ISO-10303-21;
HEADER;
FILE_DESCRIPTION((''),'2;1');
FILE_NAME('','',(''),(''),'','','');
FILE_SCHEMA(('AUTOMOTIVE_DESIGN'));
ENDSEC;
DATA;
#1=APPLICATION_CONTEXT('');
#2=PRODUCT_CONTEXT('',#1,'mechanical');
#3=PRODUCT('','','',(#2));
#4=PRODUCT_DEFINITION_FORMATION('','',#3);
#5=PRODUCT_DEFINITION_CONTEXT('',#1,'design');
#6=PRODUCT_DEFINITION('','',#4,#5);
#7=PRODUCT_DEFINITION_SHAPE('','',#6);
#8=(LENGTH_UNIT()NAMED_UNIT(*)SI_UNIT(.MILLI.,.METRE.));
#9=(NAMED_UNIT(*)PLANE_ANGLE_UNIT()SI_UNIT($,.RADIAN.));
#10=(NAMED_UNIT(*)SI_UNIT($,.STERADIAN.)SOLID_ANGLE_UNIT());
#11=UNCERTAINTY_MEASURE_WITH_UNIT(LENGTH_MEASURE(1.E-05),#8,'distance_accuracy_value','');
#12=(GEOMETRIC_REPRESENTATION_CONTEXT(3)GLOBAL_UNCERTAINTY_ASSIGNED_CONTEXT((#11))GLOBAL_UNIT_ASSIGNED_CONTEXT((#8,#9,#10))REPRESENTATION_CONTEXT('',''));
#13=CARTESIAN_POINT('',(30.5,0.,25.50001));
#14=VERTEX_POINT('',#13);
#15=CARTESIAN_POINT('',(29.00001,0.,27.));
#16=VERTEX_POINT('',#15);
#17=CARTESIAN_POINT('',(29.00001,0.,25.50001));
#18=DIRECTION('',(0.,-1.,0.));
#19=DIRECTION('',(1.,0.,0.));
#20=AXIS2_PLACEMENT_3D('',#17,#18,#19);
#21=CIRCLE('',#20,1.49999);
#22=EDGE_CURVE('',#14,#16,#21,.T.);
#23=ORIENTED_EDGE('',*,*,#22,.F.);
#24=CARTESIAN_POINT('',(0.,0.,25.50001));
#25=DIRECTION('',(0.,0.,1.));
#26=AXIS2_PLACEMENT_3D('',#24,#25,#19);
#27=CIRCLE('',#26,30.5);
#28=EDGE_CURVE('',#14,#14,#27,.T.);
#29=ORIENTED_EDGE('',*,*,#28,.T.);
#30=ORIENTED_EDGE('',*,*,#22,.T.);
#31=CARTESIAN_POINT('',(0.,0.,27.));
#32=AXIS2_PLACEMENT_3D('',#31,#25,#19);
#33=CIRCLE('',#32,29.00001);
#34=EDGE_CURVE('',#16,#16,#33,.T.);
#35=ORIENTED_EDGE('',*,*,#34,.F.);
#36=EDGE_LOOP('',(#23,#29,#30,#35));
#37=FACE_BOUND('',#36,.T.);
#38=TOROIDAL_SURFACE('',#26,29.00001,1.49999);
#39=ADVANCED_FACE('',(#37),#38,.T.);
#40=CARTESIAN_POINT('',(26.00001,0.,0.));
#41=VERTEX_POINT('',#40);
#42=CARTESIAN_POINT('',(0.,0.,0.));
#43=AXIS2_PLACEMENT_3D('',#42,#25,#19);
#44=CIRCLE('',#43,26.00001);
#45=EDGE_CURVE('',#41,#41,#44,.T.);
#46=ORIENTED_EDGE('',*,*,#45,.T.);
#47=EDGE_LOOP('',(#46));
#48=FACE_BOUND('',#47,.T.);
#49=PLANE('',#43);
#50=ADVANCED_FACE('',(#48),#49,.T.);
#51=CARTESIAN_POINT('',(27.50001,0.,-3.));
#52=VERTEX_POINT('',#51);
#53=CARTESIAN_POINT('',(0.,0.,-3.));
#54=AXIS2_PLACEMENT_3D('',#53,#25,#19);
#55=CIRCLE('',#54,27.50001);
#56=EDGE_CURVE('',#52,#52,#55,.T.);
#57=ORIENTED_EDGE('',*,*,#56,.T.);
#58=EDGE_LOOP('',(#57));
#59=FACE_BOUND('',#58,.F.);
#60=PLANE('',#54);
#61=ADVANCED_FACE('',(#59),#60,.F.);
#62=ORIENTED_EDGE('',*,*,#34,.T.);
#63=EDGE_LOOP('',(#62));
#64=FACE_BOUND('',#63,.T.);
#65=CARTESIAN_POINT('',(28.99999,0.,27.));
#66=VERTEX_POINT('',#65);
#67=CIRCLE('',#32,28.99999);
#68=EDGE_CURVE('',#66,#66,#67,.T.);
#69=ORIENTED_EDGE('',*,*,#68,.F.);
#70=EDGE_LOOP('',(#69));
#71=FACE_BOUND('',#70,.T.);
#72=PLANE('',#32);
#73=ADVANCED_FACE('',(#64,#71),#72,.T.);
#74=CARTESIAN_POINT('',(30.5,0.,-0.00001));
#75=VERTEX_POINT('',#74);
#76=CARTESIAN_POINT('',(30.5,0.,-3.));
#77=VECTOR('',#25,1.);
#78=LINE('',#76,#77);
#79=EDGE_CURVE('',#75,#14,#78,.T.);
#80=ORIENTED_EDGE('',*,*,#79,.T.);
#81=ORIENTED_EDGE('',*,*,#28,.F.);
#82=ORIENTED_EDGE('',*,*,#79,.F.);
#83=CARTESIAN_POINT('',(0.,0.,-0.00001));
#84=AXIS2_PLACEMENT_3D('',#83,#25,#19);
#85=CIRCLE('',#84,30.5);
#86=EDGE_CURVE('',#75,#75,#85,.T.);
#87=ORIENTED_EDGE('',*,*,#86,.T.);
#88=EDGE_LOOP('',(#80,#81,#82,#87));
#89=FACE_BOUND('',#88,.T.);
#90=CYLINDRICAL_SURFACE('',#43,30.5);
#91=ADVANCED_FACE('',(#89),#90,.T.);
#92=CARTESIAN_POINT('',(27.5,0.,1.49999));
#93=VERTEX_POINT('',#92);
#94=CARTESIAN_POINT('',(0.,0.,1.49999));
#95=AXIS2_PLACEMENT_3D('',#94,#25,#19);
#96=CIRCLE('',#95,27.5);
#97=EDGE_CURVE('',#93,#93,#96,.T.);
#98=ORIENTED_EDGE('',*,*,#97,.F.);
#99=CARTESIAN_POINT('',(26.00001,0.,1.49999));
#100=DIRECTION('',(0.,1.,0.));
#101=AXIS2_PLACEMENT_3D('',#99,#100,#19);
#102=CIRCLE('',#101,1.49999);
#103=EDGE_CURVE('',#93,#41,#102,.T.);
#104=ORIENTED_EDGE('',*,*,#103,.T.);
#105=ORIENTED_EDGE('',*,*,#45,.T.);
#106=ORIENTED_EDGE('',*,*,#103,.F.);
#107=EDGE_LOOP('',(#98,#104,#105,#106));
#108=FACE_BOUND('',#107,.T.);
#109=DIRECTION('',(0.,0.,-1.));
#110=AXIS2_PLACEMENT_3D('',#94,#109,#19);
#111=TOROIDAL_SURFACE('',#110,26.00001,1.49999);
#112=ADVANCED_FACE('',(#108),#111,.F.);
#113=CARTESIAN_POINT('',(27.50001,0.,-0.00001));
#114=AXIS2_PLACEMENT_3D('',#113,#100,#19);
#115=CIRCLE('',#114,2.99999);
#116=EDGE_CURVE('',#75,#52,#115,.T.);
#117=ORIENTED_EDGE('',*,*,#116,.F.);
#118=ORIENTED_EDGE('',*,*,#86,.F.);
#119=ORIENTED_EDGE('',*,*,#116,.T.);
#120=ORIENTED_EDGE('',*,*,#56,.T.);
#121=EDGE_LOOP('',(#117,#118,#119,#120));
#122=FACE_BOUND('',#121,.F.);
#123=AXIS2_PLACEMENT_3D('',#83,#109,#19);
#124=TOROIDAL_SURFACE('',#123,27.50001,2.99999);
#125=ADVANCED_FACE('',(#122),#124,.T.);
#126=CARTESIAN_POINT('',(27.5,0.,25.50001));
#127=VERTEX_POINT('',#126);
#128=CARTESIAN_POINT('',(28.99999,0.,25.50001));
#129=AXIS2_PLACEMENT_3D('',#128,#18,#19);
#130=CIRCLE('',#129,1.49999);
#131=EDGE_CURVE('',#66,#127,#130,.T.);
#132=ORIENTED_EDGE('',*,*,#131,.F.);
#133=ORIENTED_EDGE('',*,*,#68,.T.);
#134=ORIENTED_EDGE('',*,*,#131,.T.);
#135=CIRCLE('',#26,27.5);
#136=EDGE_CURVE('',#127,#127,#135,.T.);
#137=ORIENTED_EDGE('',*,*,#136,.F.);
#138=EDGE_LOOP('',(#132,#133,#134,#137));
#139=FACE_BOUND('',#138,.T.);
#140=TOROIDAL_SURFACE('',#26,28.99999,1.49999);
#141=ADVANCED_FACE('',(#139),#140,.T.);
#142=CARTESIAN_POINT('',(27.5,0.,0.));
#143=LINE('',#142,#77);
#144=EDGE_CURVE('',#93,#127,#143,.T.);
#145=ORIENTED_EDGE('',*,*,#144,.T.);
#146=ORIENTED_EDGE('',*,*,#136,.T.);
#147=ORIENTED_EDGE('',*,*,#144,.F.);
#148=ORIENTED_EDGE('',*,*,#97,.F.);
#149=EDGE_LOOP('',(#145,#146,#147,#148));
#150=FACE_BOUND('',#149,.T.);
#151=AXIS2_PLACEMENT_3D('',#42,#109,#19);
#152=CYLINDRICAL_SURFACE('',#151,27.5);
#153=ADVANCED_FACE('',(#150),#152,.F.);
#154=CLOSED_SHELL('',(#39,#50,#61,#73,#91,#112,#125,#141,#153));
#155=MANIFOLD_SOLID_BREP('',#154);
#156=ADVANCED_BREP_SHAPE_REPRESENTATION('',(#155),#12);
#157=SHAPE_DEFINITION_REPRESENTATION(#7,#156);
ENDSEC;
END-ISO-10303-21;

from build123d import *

# Parameters (mm, degrees)
F0_R     = 30.5
F0_R_2   = 27.5
F1_DEPTH = 27
F2_DEPTH = 3
F3_R     = 1.49999
F4_R     = 2.99999


# Not quite as in the source:
# - a fillet or chamfer is up to 0.001 mm smaller than in the source, because OpenCascade refuses the exact size


with BuildPart() as f1:
    # F0 (on Top) → F1 (new body)
    with BuildSketch(Plane.XY):
        Circle(F0_R)
        Circle(F0_R_2, mode=Mode.SUBTRACT)
    extrude(amount=F1_DEPTH)

    # F0 (on Top) → F2 (join)
    with BuildSketch(Plane.XY):
        Circle(F0_R)
        Circle(F0_R_2, mode=Mode.SUBTRACT)
        Circle(F0_R_2)
    extrude(amount=-F2_DEPTH)

    # F3 (radius 1.5 in the source; OpenCascade refuses exactly that, so slightly less here)
    f3_edges = [f1.edges().sort_by_distance(p)[0] for p in [
        (-30.5, 0, 27),
        (-27.5, 0, 27),
        (-27.5, 0, 0),
    ]]
    fillet(f3_edges, radius=F3_R)

    # F4 (radius 3 in the source; OpenCascade refuses exactly that, so slightly less here)
    f4_edges = [f1.edges().sort_by_distance(p)[0] for p in [
        (-30.5, 0, -3),
    ]]
    fillet(f4_edges, radius=F4_R)


solid = f1.part
